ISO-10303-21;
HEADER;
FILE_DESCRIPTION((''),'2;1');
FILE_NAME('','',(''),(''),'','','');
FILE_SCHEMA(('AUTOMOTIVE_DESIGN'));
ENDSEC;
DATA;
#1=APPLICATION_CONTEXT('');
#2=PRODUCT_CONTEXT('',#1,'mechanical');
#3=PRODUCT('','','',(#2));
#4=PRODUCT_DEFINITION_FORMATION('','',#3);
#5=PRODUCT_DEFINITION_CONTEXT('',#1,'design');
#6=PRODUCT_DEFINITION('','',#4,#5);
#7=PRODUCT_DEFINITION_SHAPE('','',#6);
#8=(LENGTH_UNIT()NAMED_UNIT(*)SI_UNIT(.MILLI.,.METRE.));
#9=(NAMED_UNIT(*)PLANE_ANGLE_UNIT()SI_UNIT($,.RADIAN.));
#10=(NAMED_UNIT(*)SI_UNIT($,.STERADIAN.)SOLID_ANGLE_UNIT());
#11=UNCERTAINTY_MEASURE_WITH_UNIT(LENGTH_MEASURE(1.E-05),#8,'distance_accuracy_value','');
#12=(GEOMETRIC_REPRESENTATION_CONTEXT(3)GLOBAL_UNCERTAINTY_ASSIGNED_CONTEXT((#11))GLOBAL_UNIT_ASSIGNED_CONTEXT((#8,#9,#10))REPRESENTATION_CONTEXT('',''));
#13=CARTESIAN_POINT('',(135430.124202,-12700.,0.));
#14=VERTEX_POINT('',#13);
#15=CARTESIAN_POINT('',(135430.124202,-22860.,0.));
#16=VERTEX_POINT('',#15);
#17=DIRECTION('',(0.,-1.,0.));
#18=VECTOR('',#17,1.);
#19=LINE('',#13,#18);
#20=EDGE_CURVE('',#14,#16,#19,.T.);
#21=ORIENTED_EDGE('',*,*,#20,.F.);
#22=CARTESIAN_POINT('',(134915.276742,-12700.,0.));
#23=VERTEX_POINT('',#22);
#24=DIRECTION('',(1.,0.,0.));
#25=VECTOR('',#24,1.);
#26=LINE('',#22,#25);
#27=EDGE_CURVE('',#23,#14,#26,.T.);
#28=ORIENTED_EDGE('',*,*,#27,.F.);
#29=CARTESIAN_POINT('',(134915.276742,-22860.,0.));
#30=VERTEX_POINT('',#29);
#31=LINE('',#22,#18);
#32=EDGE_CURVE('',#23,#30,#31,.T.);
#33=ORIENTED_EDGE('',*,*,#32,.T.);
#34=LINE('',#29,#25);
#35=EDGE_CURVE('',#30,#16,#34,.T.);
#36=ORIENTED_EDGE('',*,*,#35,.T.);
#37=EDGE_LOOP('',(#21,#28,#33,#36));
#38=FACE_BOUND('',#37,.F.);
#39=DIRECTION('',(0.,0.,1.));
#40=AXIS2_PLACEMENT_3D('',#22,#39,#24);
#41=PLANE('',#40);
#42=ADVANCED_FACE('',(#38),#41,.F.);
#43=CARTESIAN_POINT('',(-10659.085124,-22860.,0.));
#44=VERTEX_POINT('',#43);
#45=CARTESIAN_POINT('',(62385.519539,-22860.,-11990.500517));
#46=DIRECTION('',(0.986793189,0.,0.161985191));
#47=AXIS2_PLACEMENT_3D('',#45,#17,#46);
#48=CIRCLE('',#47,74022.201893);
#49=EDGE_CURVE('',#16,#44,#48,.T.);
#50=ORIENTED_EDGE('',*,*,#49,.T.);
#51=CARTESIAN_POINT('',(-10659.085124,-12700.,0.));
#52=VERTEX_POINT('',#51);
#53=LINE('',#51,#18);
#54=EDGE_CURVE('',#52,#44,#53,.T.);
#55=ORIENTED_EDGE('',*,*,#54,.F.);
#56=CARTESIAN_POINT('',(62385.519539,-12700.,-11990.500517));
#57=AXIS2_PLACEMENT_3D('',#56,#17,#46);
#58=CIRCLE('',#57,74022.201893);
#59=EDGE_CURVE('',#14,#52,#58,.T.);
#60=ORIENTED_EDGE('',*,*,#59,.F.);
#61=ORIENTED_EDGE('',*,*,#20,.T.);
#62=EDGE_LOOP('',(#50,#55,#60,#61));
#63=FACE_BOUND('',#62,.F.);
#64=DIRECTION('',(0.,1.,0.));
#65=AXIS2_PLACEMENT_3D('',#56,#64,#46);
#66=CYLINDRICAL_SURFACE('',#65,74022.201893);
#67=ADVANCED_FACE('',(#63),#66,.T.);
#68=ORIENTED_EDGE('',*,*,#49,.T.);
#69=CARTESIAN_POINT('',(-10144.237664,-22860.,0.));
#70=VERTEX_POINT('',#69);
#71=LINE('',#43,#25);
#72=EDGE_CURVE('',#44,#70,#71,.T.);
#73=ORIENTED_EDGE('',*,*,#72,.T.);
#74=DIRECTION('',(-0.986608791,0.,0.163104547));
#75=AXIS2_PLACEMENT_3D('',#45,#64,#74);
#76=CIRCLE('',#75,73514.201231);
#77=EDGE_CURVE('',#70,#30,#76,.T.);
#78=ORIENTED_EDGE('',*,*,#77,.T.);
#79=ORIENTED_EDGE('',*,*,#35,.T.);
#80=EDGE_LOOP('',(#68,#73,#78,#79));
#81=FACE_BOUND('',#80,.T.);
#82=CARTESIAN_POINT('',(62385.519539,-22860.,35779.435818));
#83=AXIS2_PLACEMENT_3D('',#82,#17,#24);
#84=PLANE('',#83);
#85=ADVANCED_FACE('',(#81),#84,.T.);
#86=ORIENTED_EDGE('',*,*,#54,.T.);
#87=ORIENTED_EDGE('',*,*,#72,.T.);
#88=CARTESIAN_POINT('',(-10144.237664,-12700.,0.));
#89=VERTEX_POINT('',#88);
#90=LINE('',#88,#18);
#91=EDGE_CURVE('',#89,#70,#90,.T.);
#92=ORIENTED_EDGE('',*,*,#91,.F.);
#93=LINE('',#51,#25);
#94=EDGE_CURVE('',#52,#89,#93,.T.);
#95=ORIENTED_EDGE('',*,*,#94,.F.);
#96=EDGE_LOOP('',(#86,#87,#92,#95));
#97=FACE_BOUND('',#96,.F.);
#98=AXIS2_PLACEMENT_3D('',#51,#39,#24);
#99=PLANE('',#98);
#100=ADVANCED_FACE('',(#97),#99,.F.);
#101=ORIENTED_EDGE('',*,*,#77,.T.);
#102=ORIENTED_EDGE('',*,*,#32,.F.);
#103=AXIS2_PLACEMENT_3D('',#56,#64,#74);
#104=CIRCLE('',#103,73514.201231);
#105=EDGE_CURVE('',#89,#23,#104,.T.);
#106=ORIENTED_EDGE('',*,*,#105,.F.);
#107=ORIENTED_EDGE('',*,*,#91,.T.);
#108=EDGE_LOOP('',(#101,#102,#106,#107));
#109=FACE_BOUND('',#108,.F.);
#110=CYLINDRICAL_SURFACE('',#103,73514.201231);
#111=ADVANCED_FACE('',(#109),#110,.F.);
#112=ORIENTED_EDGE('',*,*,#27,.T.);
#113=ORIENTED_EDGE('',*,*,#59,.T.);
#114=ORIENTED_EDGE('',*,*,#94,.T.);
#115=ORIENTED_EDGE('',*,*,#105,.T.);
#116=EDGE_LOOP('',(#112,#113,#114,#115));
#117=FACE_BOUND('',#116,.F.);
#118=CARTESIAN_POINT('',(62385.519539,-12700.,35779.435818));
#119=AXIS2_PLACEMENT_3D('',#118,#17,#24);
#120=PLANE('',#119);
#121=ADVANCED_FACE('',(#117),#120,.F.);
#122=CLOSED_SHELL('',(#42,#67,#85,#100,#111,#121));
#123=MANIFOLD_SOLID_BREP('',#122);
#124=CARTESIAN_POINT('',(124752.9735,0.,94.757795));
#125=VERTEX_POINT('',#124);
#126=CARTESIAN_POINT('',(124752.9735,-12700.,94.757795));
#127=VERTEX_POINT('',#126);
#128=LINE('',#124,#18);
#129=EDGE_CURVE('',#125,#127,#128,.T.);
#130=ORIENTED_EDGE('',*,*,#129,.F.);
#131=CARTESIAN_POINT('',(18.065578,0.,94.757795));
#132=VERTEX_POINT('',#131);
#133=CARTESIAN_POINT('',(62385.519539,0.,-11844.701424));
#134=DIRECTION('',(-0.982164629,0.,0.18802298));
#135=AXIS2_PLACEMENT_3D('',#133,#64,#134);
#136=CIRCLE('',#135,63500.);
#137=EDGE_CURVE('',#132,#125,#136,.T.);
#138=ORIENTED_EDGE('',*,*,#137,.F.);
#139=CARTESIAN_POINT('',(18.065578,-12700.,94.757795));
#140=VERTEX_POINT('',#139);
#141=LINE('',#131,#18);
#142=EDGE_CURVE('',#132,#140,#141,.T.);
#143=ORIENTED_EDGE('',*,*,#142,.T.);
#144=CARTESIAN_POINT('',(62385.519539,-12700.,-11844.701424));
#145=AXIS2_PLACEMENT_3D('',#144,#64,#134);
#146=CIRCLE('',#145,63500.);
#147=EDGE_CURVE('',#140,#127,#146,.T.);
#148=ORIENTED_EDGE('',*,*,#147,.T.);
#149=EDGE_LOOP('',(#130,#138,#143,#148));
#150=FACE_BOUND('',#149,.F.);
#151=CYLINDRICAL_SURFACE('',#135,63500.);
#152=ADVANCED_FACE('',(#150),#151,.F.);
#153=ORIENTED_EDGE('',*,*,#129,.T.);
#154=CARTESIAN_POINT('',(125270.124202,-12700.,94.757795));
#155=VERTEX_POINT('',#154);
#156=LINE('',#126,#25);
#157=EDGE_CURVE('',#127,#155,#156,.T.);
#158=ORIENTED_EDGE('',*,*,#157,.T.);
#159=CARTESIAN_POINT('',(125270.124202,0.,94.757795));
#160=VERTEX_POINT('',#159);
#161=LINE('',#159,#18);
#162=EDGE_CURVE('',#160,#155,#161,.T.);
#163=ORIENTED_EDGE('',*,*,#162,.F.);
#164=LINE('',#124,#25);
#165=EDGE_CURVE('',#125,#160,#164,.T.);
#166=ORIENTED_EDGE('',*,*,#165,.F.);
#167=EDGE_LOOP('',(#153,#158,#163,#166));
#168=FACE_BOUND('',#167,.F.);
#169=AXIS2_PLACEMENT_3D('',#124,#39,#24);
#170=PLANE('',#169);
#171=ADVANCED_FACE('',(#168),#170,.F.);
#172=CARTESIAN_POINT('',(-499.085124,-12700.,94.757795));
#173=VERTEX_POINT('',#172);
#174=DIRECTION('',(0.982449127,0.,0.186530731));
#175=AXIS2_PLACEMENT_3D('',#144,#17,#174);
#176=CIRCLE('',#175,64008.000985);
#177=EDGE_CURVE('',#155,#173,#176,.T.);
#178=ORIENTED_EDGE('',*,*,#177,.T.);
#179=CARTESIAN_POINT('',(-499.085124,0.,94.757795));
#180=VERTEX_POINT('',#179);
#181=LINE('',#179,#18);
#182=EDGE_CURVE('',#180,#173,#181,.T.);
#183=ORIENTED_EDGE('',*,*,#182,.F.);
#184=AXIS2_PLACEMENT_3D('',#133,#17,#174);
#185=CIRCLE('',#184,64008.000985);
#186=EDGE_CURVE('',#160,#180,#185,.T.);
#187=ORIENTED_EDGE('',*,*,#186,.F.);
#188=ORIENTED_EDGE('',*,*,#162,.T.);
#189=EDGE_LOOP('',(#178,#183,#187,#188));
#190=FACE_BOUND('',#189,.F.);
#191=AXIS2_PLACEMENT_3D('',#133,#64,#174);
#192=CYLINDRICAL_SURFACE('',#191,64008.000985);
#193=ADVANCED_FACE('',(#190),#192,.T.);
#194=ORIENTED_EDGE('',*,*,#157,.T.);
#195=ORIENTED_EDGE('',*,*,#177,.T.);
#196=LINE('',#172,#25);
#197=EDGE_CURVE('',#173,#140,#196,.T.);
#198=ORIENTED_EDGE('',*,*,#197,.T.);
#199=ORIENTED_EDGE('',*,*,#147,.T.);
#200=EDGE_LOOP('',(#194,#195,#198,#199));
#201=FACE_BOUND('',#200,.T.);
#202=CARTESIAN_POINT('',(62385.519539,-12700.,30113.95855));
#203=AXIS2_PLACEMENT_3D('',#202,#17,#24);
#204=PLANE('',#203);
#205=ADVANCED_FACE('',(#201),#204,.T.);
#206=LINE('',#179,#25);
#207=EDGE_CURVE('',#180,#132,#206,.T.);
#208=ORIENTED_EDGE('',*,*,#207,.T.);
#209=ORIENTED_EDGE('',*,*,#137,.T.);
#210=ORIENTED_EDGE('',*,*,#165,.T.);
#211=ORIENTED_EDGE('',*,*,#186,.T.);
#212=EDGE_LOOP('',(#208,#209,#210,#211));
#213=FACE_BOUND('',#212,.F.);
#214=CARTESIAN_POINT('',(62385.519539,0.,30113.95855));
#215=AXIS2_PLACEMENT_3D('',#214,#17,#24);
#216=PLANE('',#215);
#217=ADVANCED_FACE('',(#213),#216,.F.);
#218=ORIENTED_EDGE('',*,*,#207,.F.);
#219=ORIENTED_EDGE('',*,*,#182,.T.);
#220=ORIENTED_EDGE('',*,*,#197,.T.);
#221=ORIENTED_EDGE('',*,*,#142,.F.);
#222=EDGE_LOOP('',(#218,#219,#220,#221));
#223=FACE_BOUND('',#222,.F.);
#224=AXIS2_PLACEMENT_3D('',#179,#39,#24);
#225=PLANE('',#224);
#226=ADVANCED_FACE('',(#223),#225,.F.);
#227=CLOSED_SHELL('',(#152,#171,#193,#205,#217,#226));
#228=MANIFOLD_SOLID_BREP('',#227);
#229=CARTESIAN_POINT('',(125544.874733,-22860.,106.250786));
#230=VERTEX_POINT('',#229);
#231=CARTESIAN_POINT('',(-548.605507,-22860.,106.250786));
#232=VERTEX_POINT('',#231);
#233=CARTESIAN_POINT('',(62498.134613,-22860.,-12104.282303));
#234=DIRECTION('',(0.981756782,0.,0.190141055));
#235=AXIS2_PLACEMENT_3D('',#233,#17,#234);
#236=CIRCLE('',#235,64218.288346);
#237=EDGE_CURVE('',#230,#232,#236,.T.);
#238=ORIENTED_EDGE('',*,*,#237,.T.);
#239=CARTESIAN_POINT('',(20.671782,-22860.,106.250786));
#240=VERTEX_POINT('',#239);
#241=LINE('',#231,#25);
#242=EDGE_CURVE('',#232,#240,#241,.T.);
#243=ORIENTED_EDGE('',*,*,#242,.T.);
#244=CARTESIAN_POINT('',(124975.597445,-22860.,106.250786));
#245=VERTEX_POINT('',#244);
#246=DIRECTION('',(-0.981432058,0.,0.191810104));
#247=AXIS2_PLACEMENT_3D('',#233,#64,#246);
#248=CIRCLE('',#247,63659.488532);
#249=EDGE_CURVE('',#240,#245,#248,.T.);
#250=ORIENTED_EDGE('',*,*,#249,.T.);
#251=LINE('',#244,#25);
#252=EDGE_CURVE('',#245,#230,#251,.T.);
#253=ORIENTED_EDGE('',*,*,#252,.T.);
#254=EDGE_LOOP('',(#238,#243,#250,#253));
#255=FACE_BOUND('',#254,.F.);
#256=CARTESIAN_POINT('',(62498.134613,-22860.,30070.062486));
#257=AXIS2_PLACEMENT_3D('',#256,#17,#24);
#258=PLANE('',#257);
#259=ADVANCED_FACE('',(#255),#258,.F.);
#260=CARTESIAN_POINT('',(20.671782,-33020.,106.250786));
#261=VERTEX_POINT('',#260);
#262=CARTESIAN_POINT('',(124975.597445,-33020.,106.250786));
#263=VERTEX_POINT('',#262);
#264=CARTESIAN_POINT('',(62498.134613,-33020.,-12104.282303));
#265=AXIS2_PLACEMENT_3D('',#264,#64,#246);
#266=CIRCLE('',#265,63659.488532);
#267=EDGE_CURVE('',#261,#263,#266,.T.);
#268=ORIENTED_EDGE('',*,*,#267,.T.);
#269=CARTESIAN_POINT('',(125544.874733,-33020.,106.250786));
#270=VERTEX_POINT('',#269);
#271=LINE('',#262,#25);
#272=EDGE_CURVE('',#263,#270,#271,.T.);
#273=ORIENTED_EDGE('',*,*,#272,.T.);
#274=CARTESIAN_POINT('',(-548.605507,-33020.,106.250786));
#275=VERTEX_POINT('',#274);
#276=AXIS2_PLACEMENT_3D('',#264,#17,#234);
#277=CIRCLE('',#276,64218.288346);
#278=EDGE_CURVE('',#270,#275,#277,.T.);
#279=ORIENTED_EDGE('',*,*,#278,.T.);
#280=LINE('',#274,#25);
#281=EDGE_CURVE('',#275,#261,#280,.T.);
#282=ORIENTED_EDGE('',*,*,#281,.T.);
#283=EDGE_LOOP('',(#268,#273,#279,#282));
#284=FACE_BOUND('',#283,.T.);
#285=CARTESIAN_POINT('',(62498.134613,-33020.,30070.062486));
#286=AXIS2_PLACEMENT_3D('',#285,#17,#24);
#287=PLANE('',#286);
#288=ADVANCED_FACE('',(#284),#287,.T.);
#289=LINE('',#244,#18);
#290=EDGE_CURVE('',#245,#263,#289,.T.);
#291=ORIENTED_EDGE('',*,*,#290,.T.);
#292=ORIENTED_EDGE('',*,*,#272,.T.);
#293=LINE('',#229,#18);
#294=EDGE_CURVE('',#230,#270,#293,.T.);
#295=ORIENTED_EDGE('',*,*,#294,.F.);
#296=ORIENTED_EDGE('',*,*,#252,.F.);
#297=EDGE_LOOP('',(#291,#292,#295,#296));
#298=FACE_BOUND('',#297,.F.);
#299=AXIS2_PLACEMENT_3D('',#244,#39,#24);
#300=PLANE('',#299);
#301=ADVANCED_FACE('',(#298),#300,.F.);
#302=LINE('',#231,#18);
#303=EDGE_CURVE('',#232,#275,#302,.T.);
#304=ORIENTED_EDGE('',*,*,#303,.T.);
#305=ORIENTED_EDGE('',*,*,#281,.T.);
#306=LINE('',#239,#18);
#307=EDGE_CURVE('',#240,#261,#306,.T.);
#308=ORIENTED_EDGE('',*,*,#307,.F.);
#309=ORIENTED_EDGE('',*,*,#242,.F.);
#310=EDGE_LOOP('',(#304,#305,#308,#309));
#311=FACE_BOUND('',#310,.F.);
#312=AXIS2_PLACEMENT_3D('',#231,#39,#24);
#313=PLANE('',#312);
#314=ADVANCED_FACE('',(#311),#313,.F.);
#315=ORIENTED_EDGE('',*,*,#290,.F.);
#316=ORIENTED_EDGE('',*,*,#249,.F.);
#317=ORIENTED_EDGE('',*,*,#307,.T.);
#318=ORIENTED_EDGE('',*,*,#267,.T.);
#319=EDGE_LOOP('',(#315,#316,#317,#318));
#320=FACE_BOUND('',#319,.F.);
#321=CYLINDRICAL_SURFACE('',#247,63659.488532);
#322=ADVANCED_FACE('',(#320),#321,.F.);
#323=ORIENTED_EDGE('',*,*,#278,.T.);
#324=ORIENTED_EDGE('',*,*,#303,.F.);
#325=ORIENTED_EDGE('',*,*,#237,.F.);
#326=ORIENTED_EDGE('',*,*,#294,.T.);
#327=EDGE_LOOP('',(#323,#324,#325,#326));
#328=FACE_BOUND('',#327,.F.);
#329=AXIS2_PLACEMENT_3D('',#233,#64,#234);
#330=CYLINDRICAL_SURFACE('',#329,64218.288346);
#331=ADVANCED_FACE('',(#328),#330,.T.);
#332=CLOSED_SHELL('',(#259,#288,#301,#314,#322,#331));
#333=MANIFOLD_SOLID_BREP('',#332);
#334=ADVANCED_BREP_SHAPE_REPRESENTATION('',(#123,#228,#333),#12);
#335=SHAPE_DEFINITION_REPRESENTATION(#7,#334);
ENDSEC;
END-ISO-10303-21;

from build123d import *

# Parameters (mm, degrees)
F1_DEPTH = 12700
F3_DEPTH = 10160
F5_DEPTH = 10160


# Not quite as in the source:
# - the program builds the solid bodies; features that only make, move or delete a surface that nothing else refers to are left out


with BuildPart() as f1:
    # F0 (on Front) → F1 (new body)
    with BuildSketch(Plane.XZ):
        with BuildLine():
            ThreePointArc((18.0655783815, 94.7577951073), (62385.5195391376, 51655.2985756552), (124752.9734998938, 94.7577951073))
            Line((124752.9734998938, 94.7577951073), (125270.1242021943, 94.7577951073))
            ThreePointArc((125270.1242021943, 94.7577951073), (62385.5195391376, 52163.2995605469), (-499.0851239191, 94.7577951073))
            Line((-499.085123919, 94.7577951073), (18.0655783815, 94.7577951073))
        make_face()
    extrude(amount=F1_DEPTH)


with BuildPart() as f3:
    # F2 (on face) → F3 (new body)
    with BuildSketch(Plane.XZ.offset(12700)):
        with BuildLine():
            Line((134915.2767422943, 0), (135430.1242021946, 0))
            ThreePointArc((135430.1242021946, 0), (62385.5195391377, 62031.7013759603), (-10659.0851239193, 0))
            Line((-10659.0851239193, 0), (-10144.237664019, 0))
            ThreePointArc((-10144.2376640191, 0), (62385.5195391376, 61523.7007141114), (134915.2767422944, 0))
        make_face()
    extrude(amount=F3_DEPTH)


with BuildPart() as f5:
    # F4 (on face) → F5 (new body)
    with BuildSketch(Plane.XZ.offset(22860)):
        with BuildLine():
            ThreePointArc((20.6717815327, 106.2507860158), (62498.1346130371, 51555.2062289571), (124975.5974445415, 106.2507860157))
            Line((124975.5974445415, 106.2507860157), (125544.8747328501, 106.2507860157))
            ThreePointArc((125544.8747328501, 106.2507860157), (62498.1346130371, 52114.0060424805), (-548.6055067759, 106.2507860157))
            Line((-548.6055067759, 106.2507860157), (20.6717815327, 106.2507860157))
        make_face()
    extrude(amount=F5_DEPTH)


solid = Compound([f1.part, f3.part, f5.part])
